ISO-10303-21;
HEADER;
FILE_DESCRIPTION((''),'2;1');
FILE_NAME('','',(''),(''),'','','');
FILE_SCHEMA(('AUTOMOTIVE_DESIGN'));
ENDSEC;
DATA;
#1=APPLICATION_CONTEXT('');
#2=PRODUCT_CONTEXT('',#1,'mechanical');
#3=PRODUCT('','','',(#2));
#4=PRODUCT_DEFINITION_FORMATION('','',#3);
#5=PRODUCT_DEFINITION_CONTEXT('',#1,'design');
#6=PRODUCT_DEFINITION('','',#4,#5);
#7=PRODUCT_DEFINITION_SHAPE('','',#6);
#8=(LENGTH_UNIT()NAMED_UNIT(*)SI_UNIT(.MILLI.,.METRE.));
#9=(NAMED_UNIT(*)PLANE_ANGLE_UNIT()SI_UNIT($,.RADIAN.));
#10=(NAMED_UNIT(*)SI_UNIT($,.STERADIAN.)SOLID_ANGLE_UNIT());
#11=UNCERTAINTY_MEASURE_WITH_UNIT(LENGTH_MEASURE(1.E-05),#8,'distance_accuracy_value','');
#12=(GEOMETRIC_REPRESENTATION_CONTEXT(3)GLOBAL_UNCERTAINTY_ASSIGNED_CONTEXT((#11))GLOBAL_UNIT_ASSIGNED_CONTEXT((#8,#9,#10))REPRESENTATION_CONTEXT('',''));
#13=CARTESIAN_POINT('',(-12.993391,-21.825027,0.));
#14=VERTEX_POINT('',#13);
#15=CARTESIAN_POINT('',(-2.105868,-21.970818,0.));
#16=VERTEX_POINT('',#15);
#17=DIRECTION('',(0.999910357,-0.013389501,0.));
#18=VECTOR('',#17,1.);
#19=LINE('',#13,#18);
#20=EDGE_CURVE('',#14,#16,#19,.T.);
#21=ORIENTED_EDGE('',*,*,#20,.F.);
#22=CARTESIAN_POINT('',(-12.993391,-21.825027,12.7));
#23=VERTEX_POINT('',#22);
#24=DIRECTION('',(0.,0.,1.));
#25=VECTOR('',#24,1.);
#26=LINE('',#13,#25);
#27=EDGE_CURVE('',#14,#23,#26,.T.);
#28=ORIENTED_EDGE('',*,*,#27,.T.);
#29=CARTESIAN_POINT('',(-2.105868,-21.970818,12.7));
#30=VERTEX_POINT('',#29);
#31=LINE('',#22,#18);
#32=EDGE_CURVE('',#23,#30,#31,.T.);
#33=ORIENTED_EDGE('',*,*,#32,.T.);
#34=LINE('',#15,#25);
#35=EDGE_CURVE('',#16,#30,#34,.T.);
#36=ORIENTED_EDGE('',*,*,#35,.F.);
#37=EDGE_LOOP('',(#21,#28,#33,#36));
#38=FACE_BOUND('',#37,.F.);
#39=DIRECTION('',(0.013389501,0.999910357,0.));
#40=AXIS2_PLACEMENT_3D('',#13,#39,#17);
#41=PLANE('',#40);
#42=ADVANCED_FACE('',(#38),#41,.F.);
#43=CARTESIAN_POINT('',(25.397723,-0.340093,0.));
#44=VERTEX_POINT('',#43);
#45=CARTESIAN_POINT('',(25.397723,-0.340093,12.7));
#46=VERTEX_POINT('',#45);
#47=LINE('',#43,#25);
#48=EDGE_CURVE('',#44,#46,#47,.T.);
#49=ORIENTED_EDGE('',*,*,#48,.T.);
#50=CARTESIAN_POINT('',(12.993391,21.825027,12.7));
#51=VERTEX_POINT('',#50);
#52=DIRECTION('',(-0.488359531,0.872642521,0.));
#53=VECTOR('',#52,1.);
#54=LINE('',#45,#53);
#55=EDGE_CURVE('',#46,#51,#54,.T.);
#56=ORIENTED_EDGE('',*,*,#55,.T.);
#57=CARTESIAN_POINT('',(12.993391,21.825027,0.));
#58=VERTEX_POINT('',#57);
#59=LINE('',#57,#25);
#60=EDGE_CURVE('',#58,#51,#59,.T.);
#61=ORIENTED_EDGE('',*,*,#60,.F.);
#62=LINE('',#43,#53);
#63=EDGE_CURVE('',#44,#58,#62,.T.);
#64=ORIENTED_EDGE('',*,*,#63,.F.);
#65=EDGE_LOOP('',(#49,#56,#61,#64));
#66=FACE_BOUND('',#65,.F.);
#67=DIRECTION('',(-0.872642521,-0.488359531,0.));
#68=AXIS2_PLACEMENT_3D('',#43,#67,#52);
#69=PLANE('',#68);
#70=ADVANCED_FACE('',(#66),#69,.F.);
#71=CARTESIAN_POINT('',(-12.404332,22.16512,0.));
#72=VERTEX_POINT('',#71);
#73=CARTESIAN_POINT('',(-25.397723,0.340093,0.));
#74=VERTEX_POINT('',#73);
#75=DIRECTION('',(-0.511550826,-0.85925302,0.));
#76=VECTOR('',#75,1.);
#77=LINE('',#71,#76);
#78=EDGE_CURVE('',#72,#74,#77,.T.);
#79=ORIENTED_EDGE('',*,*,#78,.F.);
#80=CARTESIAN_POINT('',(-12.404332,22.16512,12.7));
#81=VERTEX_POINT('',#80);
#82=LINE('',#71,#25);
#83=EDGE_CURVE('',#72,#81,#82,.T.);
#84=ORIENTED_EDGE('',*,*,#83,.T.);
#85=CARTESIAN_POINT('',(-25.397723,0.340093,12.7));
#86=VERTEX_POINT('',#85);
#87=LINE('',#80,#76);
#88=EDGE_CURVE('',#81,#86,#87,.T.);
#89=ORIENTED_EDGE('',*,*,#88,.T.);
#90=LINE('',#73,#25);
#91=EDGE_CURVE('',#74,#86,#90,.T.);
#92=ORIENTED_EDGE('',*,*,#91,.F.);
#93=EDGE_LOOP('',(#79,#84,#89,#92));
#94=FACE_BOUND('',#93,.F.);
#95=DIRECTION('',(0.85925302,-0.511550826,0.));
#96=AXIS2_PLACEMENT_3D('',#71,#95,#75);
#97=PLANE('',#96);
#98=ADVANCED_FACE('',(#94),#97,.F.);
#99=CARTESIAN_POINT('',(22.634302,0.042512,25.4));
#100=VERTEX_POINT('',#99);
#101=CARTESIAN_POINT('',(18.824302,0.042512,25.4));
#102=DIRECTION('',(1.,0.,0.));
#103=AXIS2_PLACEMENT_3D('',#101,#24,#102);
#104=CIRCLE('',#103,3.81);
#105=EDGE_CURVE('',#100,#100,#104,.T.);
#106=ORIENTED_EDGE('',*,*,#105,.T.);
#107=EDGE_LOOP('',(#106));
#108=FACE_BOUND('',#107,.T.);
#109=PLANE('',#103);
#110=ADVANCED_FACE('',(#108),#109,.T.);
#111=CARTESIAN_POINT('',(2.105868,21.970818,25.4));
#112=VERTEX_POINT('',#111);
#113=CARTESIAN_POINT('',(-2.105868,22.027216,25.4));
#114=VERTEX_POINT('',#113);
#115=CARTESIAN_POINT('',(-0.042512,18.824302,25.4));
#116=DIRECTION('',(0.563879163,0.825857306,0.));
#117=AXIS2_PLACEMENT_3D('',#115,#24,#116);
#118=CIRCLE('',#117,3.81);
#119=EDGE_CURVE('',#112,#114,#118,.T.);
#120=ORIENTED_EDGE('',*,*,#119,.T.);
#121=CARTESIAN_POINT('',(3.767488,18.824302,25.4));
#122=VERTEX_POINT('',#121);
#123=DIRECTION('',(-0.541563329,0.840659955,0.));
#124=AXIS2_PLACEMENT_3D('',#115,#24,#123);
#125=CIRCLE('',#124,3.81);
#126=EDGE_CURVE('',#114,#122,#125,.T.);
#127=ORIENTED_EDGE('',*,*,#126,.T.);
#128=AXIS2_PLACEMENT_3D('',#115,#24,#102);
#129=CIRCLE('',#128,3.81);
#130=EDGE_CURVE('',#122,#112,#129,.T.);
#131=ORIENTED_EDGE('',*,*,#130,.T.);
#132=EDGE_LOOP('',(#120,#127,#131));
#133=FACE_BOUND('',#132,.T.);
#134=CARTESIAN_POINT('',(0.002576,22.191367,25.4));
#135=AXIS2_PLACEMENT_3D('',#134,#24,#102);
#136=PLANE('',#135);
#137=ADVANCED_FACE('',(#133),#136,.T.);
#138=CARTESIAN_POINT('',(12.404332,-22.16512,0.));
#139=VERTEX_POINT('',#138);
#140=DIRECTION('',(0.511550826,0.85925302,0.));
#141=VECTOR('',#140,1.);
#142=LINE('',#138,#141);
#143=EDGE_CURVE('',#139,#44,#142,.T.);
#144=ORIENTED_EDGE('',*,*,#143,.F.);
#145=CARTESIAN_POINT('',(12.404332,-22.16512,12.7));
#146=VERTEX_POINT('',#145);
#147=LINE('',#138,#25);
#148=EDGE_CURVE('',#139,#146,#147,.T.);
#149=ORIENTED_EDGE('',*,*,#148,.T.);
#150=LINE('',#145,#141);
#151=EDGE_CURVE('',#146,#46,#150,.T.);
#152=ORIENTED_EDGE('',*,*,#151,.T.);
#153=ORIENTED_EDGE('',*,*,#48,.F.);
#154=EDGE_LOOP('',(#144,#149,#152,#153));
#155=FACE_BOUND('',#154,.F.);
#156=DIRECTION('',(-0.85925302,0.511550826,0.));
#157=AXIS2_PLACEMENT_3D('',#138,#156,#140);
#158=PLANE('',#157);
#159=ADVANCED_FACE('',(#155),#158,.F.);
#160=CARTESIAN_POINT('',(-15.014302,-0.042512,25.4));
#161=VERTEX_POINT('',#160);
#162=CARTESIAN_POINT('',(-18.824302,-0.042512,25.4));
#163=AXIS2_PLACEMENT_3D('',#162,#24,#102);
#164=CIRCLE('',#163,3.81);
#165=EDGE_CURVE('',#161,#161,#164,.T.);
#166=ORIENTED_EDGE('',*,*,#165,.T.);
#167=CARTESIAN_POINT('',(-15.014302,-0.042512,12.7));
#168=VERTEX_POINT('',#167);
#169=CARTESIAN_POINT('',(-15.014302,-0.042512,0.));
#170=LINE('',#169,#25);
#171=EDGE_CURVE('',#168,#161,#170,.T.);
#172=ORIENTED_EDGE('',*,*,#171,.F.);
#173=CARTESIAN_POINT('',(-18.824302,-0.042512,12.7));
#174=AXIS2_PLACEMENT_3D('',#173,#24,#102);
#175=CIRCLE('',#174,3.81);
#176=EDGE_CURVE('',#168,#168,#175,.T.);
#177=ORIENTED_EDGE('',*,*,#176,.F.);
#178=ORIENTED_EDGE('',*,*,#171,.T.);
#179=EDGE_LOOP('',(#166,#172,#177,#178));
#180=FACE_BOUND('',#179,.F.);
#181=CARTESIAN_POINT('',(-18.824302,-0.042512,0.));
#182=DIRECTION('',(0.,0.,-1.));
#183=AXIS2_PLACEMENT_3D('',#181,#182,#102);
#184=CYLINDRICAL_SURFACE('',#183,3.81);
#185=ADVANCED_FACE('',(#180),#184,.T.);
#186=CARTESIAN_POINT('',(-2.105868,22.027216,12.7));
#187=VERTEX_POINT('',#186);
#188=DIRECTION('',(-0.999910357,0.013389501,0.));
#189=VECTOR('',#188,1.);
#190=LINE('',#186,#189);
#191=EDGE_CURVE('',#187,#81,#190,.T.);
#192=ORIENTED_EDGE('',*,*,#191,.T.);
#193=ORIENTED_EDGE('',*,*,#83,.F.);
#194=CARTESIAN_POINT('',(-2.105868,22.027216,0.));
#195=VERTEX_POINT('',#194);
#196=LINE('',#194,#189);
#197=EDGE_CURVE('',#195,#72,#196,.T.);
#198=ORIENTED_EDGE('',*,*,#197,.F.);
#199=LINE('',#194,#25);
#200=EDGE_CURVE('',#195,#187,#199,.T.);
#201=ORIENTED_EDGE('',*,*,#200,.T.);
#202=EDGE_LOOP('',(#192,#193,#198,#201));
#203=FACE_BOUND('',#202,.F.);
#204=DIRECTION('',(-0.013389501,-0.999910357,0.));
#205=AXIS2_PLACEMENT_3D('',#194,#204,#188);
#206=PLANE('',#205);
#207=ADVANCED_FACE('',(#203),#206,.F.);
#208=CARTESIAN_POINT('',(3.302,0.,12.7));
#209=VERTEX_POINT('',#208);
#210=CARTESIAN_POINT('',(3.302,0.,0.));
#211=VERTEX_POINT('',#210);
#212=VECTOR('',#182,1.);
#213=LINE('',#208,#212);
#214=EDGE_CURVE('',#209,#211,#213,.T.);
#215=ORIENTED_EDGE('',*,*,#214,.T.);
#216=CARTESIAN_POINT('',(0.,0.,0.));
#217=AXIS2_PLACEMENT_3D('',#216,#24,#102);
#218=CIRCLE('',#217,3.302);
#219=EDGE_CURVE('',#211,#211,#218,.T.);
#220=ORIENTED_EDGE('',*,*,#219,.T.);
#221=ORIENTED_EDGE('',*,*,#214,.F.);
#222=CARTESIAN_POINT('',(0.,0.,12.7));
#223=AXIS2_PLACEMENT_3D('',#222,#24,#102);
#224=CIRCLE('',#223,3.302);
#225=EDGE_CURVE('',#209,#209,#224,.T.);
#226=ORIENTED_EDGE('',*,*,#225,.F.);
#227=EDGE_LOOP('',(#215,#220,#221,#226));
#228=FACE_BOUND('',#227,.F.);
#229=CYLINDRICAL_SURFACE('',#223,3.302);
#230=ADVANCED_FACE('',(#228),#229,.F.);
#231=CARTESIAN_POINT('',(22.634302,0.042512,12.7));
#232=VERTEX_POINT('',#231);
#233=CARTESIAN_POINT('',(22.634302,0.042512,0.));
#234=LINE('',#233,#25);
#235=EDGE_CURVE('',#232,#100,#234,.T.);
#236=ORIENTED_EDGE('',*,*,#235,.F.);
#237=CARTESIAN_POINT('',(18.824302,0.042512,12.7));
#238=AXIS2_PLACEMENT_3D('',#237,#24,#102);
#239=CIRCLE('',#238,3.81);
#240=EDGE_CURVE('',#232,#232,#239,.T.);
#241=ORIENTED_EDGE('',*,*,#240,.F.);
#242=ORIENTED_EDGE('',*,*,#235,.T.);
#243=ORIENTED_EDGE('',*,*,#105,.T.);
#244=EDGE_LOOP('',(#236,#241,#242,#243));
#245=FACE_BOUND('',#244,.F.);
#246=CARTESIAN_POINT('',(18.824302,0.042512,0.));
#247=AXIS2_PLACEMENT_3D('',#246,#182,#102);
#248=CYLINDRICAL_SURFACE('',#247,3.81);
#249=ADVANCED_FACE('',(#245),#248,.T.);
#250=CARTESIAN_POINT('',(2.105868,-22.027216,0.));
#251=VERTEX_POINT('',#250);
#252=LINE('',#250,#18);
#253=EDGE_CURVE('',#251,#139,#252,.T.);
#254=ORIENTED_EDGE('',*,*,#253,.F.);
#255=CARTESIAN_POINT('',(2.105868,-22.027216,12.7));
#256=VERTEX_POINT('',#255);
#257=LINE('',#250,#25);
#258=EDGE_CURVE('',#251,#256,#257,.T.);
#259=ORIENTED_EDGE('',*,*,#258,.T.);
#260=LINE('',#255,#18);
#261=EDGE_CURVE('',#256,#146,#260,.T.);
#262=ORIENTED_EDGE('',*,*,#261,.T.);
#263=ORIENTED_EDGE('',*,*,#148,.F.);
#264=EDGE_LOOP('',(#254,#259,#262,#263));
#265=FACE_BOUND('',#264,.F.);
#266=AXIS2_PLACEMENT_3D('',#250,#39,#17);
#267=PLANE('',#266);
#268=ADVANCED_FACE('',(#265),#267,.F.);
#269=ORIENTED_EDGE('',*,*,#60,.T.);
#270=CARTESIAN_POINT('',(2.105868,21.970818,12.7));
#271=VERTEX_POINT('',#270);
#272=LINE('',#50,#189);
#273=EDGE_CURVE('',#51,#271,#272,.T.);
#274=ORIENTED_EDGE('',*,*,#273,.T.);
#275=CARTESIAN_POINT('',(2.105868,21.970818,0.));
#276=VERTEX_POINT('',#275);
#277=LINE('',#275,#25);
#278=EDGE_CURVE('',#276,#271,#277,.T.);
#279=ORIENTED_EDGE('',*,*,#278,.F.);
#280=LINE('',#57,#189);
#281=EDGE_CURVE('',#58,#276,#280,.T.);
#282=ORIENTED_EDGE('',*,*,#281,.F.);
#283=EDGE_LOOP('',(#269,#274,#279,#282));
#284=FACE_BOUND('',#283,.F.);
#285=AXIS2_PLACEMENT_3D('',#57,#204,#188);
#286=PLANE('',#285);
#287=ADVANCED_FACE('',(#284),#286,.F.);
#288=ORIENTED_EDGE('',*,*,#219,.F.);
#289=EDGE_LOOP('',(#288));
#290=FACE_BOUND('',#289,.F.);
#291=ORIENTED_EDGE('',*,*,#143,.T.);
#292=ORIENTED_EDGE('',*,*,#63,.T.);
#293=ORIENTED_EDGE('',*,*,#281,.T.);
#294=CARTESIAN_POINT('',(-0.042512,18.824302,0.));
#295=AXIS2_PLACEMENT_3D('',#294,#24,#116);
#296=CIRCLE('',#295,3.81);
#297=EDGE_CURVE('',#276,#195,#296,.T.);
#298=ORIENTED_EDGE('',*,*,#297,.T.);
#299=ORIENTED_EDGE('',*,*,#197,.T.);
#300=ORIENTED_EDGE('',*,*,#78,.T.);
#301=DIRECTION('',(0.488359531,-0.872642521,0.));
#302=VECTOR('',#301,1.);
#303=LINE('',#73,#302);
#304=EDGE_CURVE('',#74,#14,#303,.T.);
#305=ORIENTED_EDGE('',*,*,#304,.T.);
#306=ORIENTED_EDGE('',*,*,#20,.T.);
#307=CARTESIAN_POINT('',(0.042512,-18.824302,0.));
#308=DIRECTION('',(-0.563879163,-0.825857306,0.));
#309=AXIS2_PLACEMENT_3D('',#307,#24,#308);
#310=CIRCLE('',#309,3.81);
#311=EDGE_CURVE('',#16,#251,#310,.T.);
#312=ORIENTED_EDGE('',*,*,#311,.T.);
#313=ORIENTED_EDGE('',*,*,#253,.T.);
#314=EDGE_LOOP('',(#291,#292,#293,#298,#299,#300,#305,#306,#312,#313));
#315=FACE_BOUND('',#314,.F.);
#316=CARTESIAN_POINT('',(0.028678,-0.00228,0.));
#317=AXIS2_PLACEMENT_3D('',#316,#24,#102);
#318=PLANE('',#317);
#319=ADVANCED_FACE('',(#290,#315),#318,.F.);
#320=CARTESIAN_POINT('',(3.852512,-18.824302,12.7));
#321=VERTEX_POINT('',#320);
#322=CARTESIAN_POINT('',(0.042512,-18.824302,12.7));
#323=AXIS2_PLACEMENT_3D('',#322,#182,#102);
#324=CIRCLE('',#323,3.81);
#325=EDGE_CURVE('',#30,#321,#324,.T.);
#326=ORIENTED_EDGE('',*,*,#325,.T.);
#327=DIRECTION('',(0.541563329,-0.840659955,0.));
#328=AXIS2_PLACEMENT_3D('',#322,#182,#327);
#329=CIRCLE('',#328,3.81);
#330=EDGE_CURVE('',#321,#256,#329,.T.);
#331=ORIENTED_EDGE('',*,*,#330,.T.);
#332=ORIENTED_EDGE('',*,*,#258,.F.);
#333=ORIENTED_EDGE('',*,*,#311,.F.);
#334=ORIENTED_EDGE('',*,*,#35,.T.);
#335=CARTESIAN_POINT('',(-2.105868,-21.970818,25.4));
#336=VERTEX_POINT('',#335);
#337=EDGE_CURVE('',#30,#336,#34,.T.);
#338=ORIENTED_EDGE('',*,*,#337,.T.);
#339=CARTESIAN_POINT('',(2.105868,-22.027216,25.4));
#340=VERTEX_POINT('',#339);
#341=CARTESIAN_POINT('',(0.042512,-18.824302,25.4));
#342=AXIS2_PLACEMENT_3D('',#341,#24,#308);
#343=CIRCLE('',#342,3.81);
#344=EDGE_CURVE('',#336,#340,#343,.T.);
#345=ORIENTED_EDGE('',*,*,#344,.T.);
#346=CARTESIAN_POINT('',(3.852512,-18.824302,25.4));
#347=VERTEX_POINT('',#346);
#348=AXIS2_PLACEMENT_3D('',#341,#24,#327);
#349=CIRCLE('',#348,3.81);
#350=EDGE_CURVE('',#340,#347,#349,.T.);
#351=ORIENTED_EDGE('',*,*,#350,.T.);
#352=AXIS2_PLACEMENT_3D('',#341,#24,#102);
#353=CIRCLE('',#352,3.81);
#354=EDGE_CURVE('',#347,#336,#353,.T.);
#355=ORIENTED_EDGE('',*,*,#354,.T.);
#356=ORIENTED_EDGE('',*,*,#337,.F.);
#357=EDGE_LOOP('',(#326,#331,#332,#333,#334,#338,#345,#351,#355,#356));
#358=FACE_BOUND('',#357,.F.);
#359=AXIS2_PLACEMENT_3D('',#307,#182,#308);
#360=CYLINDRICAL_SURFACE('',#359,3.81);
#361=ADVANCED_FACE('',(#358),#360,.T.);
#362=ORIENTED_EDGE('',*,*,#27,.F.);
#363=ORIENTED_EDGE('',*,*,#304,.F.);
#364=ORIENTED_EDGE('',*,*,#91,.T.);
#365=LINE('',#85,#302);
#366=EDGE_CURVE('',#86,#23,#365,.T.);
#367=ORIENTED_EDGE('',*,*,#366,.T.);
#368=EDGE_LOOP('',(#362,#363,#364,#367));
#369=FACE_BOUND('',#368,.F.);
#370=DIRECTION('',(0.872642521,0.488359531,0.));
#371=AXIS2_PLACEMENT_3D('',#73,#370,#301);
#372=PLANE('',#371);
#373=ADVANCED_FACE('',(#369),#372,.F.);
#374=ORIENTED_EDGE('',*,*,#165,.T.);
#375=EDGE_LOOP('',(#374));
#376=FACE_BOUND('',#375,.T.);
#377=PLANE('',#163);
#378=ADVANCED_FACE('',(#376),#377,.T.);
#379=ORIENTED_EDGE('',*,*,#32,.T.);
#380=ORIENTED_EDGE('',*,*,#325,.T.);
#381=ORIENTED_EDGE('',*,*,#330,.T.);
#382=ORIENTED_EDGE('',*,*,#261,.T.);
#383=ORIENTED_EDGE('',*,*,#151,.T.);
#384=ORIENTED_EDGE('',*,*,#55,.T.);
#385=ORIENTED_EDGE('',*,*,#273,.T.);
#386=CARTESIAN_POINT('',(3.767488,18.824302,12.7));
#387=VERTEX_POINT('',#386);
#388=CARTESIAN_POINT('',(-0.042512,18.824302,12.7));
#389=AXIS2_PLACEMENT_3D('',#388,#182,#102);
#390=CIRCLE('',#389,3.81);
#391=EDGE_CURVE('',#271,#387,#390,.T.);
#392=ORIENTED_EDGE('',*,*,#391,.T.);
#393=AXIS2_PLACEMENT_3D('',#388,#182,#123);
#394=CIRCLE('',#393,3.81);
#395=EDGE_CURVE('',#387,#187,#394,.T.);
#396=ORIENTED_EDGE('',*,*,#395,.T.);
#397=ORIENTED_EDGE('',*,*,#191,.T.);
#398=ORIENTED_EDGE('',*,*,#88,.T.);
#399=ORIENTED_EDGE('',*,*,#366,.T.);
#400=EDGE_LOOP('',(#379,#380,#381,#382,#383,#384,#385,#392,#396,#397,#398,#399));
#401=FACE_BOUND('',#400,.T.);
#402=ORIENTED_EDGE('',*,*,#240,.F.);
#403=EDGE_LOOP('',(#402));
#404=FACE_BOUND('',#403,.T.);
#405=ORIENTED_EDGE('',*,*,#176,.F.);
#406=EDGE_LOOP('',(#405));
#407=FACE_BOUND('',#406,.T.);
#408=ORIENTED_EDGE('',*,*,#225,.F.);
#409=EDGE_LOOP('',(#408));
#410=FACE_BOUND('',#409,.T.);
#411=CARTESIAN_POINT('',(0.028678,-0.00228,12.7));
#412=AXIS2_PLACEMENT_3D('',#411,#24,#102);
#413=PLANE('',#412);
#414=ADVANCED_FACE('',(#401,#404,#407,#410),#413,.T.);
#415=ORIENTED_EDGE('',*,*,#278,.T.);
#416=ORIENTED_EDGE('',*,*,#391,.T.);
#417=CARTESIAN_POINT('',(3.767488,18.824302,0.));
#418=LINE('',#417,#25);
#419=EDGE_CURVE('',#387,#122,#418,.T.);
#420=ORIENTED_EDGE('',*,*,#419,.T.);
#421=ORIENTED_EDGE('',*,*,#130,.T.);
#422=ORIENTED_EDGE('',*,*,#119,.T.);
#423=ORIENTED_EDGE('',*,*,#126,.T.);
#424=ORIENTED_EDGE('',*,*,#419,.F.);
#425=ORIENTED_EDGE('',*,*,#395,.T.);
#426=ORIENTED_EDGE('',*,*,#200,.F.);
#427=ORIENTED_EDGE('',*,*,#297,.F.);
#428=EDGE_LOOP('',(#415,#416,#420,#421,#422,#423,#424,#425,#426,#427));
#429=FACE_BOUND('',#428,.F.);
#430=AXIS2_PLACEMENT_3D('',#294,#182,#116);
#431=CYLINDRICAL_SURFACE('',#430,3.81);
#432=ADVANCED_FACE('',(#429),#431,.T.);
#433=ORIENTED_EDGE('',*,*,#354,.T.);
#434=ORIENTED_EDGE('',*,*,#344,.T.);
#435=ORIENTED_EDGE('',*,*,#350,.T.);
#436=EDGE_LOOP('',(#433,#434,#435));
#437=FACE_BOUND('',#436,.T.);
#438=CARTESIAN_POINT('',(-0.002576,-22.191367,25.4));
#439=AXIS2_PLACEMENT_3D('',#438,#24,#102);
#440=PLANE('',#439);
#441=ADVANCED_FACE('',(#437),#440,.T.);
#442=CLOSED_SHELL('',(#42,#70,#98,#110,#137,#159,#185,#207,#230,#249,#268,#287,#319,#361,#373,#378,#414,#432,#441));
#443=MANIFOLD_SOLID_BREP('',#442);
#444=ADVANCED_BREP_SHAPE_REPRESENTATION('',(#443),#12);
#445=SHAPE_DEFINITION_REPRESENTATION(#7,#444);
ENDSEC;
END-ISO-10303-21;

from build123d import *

# Parameters (mm, degrees)
F0_R     = 3.81
F1_DEPTH = 12.7
F2_R     = 3.302
F3_DEPTH = 25.4
F4_DEPTH = 25.4


# Not quite as in the source:
# - a feature names something its author has since deleted; it is built from what else it names


with BuildPart() as f1:
    # F0 (on Top) → F1 (new body)
    with BuildSketch(Plane.XY):
        with BuildLine():
            Line((2.1058679478, -22.0272163702), (12.4043320804, -22.1651200231))
            Line((12.4043320804, -22.1651200231), (25.3977230582, -0.3400933129))
            Line((25.3977230582, -0.3400933129), (12.9933909777, 21.8250267102))
            Line((12.9933909777, 21.8250267102), (2.1058679478, 21.9708182746))
            ThreePointArc((2.1058679478, 21.9708182746), (3.3265702822, 20.6034553453), (3.7674883359, 18.8243019401))
            ThreePointArc((3.7674883359, 18.8243019401), (-1.8666159044, 15.4793439852), (-2.1058679478, 22.0272163702))
            Line((-2.1058679478, 22.0272163702), (-12.4043320804, 22.1651200231))
            Line((-12.4043320804, 22.1651200231), (-25.3977230582, 0.3400933129))
            Line((-25.3977230582, 0.3400933129), (-12.9933909777, -21.8250267102))
            Line((-12.9933909777, -21.8250267102), (-2.1058679478, -21.9708182746))
            ThreePointArc((-2.1058679478, -21.9708182746), (-1.7366417411, -15.4552199938), (3.8525116641, -18.8243019401))
            ThreePointArc((3.8525116641, -18.8243019401), (3.3874696191, -20.6484061804), (2.1058679478, -22.0272163702))
        make_face()
        with Locations((-18.8243019401, -0.0425116641)):
            Circle(F0_R, mode=Mode.SUBTRACT)
        with Locations((18.8243019401, 0.0425116641)):
            Circle(F0_R, mode=Mode.SUBTRACT)
        with BuildLine():
            ThreePointArc((-2.1058679478, -21.9708182746), (-0.0085023328, -22.6339603988), (2.1058679478, -22.0272163702))
            Line((2.1058679478, -22.0272163702), (-2.1058679478, -21.9708182746))
        make_face()
        with BuildLine():
            Line((-2.1058679478, -21.9708182746), (2.1058679478, -22.0272163702))
            ThreePointArc((2.1058679478, -22.0272163702), (3.3874696191, -20.6484061804), (3.8525116641, -18.8243019401))
            ThreePointArc((3.8525116641, -18.8243019401), (-1.7366417411, -15.4552199938), (-2.1058679478, -21.9708182746))
        make_face()
        with BuildLine():
            ThreePointArc((3.7674883359, 18.8243019401), (3.3265702822, 20.6034553453), (2.1058679478, 21.9708182746))
            Line((2.1058679478, 21.9708182746), (-2.1058679478, 22.0272163702))
            ThreePointArc((-2.1058679478, 22.0272163702), (-1.8666159044, 15.4793439852), (3.7674883359, 18.8243019401))
        make_face()
        with BuildLine():
            Line((-2.1058679478, 22.0272163702), (2.1058679478, 21.9708182746))
            ThreePointArc((2.1058679478, 21.9708182746), (0.0085023328, 22.6339603988), (-2.1058679478, 22.0272163702))
        make_face()
    extrude(amount=F1_DEPTH)

    # F2 (on face) → F3 (cut)
    with BuildSketch(Plane.XY.offset(12.7)):
        Circle(F2_R)
    extrude(amount=-F3_DEPTH, mode=Mode.SUBTRACT)

    # F0 (on Top) → F4 (join)
    with BuildSketch(Plane.XY):
        with BuildLine():
            Line((-2.1058679478, 22.0272163702), (2.1058679478, 21.9708182746))
            ThreePointArc((2.1058679478, 21.9708182746), (0.0085023328, 22.6339603988), (-2.1058679478, 22.0272163702))
        make_face()
        with BuildLine():
            ThreePointArc((3.7674883359, 18.8243019401), (3.3265702822, 20.6034553453), (2.1058679478, 21.9708182746))
            Line((2.1058679478, 21.9708182746), (-2.1058679478, 22.0272163702))
            ThreePointArc((-2.1058679478, 22.0272163702), (-1.8666159044, 15.4793439852), (3.7674883359, 18.8243019401))
        make_face()
        with Locations((18.8243019401, 0.0425116641)):
            Circle(F0_R)
        with BuildLine():
            ThreePointArc((-2.1058679478, -21.9708182746), (-0.0085023328, -22.6339603988), (2.1058679478, -22.0272163702))
            Line((2.1058679478, -22.0272163702), (-2.1058679478, -21.9708182746))
        make_face()
        with BuildLine():
            Line((-2.1058679478, -21.9708182746), (2.1058679478, -22.0272163702))
            ThreePointArc((2.1058679478, -22.0272163702), (3.3874696191, -20.6484061804), (3.8525116641, -18.8243019401))
            ThreePointArc((3.8525116641, -18.8243019401), (-1.7366417411, -15.4552199938), (-2.1058679478, -21.9708182746))
        make_face()
        with Locations((-18.8243019401, -0.0425116641)):
            Circle(F0_R)
    extrude(amount=F4_DEPTH)


solid = f1.part
